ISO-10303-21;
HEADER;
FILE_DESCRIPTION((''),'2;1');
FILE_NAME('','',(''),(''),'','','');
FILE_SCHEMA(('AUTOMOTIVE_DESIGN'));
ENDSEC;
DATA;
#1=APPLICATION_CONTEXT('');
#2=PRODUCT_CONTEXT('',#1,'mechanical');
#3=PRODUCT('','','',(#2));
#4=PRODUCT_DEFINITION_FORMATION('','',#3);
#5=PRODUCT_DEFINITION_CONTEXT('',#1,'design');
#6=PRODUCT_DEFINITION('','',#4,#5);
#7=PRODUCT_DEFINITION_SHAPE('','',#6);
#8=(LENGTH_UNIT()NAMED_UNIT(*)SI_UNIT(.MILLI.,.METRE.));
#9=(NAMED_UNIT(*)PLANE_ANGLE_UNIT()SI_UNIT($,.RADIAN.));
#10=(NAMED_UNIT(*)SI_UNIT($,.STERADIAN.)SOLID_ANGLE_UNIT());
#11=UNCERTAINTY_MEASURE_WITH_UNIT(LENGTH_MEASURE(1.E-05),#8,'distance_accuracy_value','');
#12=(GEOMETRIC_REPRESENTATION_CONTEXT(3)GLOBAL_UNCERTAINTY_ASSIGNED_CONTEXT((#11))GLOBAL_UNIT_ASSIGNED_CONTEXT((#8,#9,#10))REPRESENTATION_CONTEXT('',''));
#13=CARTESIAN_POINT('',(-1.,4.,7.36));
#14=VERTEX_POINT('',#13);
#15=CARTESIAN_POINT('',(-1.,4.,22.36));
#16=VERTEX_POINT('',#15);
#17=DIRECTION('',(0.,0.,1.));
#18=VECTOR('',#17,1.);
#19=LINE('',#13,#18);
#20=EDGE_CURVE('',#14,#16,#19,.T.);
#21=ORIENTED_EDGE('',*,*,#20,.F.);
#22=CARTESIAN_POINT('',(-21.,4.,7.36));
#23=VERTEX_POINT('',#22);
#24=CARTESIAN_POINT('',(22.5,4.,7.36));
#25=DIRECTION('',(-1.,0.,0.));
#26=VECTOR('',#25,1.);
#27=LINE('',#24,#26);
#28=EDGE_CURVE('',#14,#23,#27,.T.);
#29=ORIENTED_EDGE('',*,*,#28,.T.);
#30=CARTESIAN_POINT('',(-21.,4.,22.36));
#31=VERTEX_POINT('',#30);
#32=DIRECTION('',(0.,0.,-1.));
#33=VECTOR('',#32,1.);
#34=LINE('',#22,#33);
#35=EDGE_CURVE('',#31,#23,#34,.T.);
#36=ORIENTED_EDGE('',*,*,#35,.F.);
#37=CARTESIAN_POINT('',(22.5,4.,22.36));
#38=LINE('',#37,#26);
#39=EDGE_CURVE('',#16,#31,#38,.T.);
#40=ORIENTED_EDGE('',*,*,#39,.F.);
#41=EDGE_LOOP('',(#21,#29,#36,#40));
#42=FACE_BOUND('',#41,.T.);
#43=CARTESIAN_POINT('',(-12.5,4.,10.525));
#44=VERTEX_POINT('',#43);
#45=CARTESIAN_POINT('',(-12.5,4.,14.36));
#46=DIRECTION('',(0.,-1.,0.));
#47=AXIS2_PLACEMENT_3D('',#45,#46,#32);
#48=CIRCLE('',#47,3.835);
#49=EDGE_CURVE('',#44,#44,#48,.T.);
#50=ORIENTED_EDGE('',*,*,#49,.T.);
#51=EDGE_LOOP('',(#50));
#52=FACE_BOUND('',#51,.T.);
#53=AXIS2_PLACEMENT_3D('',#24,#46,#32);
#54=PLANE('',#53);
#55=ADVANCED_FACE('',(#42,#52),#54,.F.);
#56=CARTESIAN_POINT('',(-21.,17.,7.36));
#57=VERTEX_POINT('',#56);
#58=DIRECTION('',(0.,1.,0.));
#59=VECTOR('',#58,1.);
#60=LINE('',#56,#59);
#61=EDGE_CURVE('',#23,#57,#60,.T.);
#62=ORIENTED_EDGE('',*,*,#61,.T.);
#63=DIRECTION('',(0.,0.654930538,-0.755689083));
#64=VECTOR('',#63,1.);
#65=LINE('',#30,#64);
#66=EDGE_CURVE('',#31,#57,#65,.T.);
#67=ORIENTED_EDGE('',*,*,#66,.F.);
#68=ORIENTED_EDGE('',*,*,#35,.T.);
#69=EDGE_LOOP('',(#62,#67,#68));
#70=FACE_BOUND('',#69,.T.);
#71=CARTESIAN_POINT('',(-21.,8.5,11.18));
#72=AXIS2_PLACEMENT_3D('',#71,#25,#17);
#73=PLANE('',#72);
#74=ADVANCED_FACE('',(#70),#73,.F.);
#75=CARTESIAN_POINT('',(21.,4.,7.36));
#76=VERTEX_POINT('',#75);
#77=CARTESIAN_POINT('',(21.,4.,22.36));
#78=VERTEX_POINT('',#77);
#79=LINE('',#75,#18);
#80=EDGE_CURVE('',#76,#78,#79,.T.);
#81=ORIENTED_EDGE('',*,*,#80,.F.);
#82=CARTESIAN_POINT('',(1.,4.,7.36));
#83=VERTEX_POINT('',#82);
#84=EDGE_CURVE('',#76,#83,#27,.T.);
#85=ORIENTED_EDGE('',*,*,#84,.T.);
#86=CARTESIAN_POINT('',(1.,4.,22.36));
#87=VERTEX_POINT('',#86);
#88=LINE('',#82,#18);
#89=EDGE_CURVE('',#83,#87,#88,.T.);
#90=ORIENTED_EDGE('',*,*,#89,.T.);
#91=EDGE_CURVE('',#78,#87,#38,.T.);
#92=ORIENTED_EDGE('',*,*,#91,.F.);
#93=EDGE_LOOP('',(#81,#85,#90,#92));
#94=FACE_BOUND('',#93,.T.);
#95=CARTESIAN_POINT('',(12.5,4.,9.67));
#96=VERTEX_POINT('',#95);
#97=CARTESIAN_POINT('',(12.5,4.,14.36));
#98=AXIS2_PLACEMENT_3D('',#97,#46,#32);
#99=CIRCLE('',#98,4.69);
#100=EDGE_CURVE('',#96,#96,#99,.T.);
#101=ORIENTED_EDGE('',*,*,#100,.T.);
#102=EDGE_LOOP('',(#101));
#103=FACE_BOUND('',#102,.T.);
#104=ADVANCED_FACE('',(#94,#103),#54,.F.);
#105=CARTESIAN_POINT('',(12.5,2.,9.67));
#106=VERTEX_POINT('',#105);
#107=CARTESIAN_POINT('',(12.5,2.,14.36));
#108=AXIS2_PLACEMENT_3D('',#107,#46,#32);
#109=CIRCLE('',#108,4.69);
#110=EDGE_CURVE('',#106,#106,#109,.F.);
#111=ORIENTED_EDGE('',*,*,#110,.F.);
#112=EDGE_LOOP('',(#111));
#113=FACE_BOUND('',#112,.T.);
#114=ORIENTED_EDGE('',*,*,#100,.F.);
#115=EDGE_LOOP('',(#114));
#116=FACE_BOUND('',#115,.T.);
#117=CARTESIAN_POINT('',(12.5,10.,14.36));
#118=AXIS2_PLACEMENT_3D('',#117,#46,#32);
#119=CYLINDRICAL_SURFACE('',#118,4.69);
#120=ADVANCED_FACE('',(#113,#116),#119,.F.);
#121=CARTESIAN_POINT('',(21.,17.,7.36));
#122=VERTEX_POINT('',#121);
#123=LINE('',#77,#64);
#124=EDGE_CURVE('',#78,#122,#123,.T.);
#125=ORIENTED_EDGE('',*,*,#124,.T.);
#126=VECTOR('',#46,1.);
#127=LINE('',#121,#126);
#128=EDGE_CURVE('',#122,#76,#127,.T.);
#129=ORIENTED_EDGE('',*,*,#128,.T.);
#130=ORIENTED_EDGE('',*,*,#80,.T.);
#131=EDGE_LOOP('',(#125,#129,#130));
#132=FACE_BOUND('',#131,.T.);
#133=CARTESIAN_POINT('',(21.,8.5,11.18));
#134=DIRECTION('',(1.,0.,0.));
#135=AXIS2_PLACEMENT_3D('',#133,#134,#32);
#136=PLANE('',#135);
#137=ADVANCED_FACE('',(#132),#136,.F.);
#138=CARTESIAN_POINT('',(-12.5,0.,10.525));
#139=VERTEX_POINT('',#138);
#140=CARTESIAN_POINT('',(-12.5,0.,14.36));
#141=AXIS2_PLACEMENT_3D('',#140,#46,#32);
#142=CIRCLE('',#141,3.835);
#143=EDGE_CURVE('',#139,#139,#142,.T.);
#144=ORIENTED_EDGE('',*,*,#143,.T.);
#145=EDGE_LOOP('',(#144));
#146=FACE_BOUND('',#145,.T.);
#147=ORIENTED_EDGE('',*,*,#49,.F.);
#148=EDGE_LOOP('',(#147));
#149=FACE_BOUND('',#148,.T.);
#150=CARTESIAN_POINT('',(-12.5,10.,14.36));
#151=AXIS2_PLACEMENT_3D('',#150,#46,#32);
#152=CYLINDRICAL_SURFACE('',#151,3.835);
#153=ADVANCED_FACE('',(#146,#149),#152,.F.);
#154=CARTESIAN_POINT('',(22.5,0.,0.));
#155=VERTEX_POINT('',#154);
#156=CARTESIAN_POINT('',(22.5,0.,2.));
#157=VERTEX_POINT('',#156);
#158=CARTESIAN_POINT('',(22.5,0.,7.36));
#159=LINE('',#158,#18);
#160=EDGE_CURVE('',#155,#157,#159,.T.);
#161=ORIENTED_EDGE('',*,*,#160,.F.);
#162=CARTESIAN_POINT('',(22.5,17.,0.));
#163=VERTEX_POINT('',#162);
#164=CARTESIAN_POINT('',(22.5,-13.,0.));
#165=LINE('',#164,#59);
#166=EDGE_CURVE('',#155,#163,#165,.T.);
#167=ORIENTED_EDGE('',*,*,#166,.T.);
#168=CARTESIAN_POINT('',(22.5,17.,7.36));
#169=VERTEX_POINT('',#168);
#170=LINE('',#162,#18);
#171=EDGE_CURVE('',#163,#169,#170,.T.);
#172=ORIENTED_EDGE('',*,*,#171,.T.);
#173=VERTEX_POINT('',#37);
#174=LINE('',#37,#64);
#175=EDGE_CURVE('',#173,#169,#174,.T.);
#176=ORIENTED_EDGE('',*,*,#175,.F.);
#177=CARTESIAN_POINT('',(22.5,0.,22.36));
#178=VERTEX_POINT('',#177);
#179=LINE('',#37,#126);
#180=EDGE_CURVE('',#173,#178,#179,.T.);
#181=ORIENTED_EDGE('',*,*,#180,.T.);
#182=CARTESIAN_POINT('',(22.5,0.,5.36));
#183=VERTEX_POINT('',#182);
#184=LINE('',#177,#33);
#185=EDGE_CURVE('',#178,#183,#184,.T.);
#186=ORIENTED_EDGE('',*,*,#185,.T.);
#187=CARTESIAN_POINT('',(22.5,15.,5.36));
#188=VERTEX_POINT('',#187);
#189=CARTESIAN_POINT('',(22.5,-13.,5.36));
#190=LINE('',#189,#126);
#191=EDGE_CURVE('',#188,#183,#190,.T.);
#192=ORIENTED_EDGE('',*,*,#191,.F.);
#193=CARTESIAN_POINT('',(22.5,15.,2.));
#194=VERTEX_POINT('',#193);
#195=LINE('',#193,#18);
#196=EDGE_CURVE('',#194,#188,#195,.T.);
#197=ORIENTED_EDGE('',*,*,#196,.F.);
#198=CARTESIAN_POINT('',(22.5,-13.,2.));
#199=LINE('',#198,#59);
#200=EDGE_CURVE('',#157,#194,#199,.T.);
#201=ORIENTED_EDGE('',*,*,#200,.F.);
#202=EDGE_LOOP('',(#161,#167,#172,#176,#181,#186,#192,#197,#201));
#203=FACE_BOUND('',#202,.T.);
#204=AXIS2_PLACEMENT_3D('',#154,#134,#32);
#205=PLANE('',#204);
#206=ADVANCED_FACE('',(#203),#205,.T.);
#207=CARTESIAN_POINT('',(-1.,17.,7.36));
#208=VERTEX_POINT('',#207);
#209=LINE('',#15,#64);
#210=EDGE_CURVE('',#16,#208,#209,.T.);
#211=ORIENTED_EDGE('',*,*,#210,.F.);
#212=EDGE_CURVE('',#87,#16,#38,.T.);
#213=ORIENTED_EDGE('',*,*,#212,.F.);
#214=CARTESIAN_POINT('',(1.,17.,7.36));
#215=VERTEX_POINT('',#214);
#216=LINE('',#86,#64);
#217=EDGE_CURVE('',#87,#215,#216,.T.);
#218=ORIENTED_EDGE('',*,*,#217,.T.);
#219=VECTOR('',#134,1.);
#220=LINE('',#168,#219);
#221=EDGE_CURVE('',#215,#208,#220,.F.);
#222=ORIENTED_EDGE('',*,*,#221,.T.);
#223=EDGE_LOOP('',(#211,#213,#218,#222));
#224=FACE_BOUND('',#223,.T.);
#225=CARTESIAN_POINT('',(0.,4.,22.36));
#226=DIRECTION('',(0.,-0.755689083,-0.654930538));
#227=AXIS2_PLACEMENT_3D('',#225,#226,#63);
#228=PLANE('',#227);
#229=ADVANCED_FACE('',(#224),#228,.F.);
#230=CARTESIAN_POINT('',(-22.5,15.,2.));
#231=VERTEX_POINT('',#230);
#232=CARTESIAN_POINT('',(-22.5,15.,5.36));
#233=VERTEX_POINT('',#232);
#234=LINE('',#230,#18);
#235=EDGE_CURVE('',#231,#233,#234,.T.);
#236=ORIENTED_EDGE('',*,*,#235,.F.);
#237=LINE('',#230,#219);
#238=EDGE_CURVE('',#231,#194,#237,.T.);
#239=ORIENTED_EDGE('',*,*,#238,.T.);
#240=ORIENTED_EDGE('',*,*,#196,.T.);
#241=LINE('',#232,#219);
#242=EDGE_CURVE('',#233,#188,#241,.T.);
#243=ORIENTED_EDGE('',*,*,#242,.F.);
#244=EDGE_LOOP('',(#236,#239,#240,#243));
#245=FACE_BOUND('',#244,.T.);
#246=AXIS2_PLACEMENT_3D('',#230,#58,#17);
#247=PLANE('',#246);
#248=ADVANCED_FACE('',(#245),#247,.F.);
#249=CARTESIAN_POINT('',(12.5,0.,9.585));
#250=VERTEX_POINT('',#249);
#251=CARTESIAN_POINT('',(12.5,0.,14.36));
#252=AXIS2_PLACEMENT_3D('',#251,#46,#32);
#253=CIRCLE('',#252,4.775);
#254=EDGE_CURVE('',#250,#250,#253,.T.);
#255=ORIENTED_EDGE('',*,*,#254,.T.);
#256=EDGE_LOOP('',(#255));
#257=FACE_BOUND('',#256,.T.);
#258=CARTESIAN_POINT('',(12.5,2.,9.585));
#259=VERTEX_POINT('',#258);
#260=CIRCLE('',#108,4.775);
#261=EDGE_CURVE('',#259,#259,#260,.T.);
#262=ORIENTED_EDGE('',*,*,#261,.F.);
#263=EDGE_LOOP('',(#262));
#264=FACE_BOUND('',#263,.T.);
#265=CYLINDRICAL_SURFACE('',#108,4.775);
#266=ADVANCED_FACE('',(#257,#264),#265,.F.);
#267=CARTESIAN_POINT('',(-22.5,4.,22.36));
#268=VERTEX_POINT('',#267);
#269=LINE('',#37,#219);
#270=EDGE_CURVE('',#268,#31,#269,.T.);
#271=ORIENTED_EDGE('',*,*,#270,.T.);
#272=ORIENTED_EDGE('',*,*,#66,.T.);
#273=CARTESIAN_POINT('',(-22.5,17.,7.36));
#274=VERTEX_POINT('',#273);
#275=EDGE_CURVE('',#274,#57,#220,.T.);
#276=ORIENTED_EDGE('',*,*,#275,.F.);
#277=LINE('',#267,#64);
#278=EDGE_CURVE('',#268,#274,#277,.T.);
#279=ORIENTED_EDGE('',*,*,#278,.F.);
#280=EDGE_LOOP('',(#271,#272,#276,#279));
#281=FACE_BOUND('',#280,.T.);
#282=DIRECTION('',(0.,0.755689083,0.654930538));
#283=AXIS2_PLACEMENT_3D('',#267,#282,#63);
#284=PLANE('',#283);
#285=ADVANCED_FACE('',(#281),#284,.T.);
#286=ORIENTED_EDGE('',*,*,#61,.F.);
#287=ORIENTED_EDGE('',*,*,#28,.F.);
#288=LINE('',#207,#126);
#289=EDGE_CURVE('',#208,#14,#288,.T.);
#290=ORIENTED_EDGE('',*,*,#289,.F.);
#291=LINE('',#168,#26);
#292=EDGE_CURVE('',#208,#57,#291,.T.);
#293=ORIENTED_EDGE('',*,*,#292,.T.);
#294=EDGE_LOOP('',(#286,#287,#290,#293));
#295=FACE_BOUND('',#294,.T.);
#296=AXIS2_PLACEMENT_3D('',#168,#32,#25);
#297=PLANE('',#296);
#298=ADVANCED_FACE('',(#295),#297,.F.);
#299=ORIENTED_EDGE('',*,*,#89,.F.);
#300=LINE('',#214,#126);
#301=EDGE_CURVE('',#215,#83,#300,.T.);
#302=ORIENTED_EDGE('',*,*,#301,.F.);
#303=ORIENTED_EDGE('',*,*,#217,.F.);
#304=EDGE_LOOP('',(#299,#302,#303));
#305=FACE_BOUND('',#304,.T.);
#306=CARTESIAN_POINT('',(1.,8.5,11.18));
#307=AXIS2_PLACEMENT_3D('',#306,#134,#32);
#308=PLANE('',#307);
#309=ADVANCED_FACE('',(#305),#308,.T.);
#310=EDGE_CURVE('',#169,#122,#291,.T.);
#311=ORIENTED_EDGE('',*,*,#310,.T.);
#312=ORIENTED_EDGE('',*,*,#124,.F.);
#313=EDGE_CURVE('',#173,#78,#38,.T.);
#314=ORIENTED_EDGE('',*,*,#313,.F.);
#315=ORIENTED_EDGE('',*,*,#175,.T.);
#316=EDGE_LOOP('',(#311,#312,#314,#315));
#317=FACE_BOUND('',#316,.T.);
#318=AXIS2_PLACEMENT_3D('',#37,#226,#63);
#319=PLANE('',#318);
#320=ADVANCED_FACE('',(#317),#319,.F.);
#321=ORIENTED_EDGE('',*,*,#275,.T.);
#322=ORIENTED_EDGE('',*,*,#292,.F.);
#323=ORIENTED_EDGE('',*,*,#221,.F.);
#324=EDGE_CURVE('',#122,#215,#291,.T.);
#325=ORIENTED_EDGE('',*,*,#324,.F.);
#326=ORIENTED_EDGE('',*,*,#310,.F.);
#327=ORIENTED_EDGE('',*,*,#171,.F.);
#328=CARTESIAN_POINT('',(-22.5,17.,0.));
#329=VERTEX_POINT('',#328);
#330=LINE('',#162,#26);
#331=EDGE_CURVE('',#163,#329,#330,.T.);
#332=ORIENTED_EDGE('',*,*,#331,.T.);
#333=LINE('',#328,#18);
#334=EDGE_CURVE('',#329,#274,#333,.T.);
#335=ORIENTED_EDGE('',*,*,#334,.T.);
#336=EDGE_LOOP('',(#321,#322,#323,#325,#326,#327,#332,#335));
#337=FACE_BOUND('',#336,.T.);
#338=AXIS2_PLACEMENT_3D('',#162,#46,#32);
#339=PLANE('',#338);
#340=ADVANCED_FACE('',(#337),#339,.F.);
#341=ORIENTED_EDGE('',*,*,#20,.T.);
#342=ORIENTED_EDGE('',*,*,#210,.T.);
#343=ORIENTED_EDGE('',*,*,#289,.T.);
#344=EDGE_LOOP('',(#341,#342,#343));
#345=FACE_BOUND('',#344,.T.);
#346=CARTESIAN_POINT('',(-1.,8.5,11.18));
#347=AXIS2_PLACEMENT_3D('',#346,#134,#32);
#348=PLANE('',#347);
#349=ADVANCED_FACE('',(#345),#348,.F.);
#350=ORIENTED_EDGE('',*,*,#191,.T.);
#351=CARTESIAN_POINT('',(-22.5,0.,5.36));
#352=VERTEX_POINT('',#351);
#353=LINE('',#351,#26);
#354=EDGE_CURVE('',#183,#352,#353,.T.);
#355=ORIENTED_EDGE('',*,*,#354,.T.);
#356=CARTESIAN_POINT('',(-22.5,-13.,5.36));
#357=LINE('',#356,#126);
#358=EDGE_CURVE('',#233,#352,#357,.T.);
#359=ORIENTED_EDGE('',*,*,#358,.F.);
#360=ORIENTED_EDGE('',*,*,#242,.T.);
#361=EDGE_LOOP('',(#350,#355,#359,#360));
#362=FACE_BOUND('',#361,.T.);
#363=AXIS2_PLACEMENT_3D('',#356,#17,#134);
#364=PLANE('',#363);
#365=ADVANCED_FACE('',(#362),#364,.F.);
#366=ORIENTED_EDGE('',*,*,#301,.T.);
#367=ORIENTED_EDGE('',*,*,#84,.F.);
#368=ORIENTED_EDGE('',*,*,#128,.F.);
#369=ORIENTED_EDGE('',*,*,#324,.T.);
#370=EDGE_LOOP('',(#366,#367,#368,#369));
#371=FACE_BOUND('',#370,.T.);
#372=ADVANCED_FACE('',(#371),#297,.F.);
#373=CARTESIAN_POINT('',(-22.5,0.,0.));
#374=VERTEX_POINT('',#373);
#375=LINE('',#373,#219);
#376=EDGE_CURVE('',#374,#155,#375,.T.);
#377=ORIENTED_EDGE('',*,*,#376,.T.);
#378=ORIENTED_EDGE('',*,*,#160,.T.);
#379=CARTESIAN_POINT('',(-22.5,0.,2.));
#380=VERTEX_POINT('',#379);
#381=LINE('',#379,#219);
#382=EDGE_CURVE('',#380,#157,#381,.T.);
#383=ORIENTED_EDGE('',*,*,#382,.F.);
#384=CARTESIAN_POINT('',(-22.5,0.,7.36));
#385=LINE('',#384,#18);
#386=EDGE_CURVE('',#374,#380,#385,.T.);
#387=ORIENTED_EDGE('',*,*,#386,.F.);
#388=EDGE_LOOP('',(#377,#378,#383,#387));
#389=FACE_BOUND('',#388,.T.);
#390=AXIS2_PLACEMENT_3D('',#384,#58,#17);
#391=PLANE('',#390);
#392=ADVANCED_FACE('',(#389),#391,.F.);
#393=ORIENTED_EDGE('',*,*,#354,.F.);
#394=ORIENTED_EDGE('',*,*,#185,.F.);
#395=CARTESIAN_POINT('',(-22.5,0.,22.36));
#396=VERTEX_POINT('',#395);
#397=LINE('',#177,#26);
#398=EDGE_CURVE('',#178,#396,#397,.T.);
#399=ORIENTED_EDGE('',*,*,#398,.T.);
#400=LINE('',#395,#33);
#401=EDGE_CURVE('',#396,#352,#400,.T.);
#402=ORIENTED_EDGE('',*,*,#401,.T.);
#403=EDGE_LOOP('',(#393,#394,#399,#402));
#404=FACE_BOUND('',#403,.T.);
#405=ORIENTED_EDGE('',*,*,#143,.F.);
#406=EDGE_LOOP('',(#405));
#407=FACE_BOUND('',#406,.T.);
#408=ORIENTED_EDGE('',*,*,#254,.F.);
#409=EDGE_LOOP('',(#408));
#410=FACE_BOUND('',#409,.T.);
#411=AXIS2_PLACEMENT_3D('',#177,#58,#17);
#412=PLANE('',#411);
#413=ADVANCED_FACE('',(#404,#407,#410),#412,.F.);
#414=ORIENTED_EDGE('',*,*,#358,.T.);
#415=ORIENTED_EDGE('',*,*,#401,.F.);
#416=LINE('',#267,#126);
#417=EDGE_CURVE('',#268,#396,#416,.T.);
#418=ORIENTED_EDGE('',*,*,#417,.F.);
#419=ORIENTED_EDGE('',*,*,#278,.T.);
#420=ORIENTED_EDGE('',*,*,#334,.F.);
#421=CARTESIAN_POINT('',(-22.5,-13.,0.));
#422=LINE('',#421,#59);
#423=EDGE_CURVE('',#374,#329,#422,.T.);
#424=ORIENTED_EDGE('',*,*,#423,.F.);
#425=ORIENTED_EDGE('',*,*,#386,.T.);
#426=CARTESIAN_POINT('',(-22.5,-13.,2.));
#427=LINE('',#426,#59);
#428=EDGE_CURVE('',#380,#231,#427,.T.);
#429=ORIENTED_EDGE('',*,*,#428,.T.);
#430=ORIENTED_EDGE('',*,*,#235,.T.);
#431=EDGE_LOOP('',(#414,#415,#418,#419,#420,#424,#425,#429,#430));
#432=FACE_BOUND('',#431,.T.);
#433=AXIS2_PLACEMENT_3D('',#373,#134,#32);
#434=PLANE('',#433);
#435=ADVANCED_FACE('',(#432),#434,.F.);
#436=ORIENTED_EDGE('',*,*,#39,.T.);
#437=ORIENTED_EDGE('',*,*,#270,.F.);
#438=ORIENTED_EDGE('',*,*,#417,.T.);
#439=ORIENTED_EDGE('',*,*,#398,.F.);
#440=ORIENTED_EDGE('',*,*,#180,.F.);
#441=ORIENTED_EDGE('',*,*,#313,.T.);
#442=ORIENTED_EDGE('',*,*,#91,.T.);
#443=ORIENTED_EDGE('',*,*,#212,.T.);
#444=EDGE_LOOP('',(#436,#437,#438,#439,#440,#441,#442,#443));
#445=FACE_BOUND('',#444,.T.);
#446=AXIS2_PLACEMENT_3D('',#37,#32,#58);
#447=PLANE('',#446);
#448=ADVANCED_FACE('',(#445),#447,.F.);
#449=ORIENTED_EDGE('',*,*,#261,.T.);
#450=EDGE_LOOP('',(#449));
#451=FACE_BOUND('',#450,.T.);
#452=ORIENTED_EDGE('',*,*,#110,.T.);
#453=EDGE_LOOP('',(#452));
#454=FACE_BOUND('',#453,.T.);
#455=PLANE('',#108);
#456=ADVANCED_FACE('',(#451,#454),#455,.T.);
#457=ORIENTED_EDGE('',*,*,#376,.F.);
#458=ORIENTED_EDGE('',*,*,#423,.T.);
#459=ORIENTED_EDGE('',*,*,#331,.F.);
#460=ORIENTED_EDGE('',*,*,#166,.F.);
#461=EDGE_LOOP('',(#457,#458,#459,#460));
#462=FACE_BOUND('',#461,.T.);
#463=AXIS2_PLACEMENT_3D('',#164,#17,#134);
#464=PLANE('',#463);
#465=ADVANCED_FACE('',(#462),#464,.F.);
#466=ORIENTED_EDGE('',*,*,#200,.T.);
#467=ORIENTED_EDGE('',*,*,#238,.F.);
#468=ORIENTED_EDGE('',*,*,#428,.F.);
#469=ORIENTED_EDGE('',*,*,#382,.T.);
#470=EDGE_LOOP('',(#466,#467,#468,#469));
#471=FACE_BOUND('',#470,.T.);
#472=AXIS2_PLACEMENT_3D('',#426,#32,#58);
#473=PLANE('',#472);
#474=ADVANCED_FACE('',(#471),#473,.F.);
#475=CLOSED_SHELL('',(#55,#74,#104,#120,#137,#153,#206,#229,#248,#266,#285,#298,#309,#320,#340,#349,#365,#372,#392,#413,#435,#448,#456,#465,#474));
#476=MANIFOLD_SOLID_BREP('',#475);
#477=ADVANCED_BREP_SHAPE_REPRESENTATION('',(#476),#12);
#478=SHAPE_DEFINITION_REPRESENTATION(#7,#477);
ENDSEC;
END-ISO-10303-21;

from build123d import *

# Parameters (mm, degrees)
BOSS_EXTRUDE1_DEPTH = 22.5
SKETCH2_W           = 3.36
SKETCH2_H           = 28
CUT_EXTRUDE1_DEPTH  = 54.046862301
SKETCH3_W           = 7.36
SKETCH3_H           = 13
CUT_EXTRUDE2_DEPTH  = 54.046862301
SKETCH4_R           = 4.69
SKETCH4_R_2         = 3.835
CUT_EXTRUDE3_DEPTH  = 10
SKETCH6_R           = 4.775
CUT_EXTRUDE5_DEPTH  = 2
RIB2_REACH          = 55.047
SKETCH7_WALL_W      = 127.943157844
SKETCH7_WALL_H      = 1.5
RIB3_REACH          = 55.047
SKETCH8_WALL_W      = 127.943157844
SKETCH8_WALL_H      = 1.5
RIB4_REACH          = 37.989
SKETCH9_WALL_W      = 93.8277522
SKETCH9_WALL_H      = 2


with BuildPart() as part:
    # Sketch1 → Boss-Extrude1 (new, symmetric)
    with BuildSketch(Plane(origin=(0, 0, 0), x_dir=(0, 0, -1), z_dir=(1, 0, 0))):
        Polygon((0, -13), (0, 17), (-7.36, 17), (-7.36, 4), (-22.36, 4), (-22.36, 0), (-7.36, 0), (-7.36, -13), align=None)
    extrude(amount=BOSS_EXTRUDE1_DEPTH, both=True)

    # Sketch2 → Cut-Extrude1 (cut, through all)
    with BuildSketch(Plane(origin=(22.5, 0, 0), x_dir=(0, 0, -1), z_dir=(1, 0, 0))):
        with Locations((-3.68, 1)):
            Rectangle(SKETCH2_W, SKETCH2_H)
    extrude(amount=-CUT_EXTRUDE1_DEPTH, mode=Mode.SUBTRACT)

    # Sketch3 → Cut-Extrude2 (cut, through all)
    with BuildSketch(Plane(origin=(22.5, 0, 0), x_dir=(0, 0, -1), z_dir=(1, 0, 0))):
        with Locations((-3.68, -6.5)):
            Rectangle(SKETCH3_W, SKETCH3_H)
    extrude(amount=-CUT_EXTRUDE2_DEPTH, mode=Mode.SUBTRACT)

    # Sketch4 → Cut-Extrude3 (cut)
    with BuildSketch(Plane(origin=(0, 0, 0), x_dir=(-1, 0, 0), z_dir=(0, -1, 0))):
        with Locations((-12.5, -14.36)):
            Circle(SKETCH4_R)
        with Locations((12.5, -14.36)):
            Circle(SKETCH4_R_2)
    extrude(amount=-CUT_EXTRUDE3_DEPTH, mode=Mode.SUBTRACT)

    # Sketch6 → Cut-Extrude5 (cut)
    with BuildSketch(Plane(origin=(0, 0, 0), x_dir=(-1, 0, 0), z_dir=(0, -1, 0))):
        with Locations((-12.5, -14.36)):
            Circle(SKETCH6_R)
    extrude(amount=-CUT_EXTRUDE5_DEPTH, mode=Mode.SUBTRACT)

    # Sketch7 wall → Rib2 (add, up to next)
    with BuildSketch(Plane(origin=(-22.5, 10.5, 14.86), x_dir=(0, 0.654930538418, -0.75568908279), z_dir=(0, -0.75568908279, -0.654930538418)), mode=Mode.PRIVATE) as rib2_sk1:
        with Locations((0, 0.75)):
            Rectangle(SKETCH7_WALL_W, SKETCH7_WALL_H)
    rib2_tool1 = extrude(rib2_sk1.sketch, amount=RIB2_REACH, mode=Mode.PRIVATE) - part.part
    add(rib2_tool1.solids().sort_by_distance((-22.5, 10.5, 14.86))[0])

    # Sketch8 wall → Rib3 (add, up to next)
    with BuildSketch(Plane(origin=(22.5, 10.5, 14.86), x_dir=(0, 0.654930538418, -0.75568908279), z_dir=(0, 0.75568908279, 0.654930538418)), mode=Mode.PRIVATE) as rib3_sk1:
        with Locations((0, 0.75)):
            Rectangle(SKETCH8_WALL_W, SKETCH8_WALL_H)
    rib3_tool1 = extrude(rib3_sk1.sketch, amount=-RIB3_REACH, mode=Mode.PRIVATE) - part.part
    add(rib3_tool1.solids().sort_by_distance((22.5, 10.5, 14.86))[0])

    # Sketch9 wall → Rib4 (add, up to next)
    with BuildSketch(Plane(origin=(0, 10.5, 14.86), x_dir=(0, 0.654930538418, -0.75568908279), z_dir=(0, 0.75568908279, 0.654930538418)), mode=Mode.PRIVATE) as rib4_sk1:
        Rectangle(SKETCH9_WALL_W, SKETCH9_WALL_H)
    rib4_tool1 = extrude(rib4_sk1.sketch, amount=-RIB4_REACH, mode=Mode.PRIVATE) - part.part
    add(rib4_tool1.solids().sort_by_distance((0, 10.5, 14.86))[0])


solid = part.part
